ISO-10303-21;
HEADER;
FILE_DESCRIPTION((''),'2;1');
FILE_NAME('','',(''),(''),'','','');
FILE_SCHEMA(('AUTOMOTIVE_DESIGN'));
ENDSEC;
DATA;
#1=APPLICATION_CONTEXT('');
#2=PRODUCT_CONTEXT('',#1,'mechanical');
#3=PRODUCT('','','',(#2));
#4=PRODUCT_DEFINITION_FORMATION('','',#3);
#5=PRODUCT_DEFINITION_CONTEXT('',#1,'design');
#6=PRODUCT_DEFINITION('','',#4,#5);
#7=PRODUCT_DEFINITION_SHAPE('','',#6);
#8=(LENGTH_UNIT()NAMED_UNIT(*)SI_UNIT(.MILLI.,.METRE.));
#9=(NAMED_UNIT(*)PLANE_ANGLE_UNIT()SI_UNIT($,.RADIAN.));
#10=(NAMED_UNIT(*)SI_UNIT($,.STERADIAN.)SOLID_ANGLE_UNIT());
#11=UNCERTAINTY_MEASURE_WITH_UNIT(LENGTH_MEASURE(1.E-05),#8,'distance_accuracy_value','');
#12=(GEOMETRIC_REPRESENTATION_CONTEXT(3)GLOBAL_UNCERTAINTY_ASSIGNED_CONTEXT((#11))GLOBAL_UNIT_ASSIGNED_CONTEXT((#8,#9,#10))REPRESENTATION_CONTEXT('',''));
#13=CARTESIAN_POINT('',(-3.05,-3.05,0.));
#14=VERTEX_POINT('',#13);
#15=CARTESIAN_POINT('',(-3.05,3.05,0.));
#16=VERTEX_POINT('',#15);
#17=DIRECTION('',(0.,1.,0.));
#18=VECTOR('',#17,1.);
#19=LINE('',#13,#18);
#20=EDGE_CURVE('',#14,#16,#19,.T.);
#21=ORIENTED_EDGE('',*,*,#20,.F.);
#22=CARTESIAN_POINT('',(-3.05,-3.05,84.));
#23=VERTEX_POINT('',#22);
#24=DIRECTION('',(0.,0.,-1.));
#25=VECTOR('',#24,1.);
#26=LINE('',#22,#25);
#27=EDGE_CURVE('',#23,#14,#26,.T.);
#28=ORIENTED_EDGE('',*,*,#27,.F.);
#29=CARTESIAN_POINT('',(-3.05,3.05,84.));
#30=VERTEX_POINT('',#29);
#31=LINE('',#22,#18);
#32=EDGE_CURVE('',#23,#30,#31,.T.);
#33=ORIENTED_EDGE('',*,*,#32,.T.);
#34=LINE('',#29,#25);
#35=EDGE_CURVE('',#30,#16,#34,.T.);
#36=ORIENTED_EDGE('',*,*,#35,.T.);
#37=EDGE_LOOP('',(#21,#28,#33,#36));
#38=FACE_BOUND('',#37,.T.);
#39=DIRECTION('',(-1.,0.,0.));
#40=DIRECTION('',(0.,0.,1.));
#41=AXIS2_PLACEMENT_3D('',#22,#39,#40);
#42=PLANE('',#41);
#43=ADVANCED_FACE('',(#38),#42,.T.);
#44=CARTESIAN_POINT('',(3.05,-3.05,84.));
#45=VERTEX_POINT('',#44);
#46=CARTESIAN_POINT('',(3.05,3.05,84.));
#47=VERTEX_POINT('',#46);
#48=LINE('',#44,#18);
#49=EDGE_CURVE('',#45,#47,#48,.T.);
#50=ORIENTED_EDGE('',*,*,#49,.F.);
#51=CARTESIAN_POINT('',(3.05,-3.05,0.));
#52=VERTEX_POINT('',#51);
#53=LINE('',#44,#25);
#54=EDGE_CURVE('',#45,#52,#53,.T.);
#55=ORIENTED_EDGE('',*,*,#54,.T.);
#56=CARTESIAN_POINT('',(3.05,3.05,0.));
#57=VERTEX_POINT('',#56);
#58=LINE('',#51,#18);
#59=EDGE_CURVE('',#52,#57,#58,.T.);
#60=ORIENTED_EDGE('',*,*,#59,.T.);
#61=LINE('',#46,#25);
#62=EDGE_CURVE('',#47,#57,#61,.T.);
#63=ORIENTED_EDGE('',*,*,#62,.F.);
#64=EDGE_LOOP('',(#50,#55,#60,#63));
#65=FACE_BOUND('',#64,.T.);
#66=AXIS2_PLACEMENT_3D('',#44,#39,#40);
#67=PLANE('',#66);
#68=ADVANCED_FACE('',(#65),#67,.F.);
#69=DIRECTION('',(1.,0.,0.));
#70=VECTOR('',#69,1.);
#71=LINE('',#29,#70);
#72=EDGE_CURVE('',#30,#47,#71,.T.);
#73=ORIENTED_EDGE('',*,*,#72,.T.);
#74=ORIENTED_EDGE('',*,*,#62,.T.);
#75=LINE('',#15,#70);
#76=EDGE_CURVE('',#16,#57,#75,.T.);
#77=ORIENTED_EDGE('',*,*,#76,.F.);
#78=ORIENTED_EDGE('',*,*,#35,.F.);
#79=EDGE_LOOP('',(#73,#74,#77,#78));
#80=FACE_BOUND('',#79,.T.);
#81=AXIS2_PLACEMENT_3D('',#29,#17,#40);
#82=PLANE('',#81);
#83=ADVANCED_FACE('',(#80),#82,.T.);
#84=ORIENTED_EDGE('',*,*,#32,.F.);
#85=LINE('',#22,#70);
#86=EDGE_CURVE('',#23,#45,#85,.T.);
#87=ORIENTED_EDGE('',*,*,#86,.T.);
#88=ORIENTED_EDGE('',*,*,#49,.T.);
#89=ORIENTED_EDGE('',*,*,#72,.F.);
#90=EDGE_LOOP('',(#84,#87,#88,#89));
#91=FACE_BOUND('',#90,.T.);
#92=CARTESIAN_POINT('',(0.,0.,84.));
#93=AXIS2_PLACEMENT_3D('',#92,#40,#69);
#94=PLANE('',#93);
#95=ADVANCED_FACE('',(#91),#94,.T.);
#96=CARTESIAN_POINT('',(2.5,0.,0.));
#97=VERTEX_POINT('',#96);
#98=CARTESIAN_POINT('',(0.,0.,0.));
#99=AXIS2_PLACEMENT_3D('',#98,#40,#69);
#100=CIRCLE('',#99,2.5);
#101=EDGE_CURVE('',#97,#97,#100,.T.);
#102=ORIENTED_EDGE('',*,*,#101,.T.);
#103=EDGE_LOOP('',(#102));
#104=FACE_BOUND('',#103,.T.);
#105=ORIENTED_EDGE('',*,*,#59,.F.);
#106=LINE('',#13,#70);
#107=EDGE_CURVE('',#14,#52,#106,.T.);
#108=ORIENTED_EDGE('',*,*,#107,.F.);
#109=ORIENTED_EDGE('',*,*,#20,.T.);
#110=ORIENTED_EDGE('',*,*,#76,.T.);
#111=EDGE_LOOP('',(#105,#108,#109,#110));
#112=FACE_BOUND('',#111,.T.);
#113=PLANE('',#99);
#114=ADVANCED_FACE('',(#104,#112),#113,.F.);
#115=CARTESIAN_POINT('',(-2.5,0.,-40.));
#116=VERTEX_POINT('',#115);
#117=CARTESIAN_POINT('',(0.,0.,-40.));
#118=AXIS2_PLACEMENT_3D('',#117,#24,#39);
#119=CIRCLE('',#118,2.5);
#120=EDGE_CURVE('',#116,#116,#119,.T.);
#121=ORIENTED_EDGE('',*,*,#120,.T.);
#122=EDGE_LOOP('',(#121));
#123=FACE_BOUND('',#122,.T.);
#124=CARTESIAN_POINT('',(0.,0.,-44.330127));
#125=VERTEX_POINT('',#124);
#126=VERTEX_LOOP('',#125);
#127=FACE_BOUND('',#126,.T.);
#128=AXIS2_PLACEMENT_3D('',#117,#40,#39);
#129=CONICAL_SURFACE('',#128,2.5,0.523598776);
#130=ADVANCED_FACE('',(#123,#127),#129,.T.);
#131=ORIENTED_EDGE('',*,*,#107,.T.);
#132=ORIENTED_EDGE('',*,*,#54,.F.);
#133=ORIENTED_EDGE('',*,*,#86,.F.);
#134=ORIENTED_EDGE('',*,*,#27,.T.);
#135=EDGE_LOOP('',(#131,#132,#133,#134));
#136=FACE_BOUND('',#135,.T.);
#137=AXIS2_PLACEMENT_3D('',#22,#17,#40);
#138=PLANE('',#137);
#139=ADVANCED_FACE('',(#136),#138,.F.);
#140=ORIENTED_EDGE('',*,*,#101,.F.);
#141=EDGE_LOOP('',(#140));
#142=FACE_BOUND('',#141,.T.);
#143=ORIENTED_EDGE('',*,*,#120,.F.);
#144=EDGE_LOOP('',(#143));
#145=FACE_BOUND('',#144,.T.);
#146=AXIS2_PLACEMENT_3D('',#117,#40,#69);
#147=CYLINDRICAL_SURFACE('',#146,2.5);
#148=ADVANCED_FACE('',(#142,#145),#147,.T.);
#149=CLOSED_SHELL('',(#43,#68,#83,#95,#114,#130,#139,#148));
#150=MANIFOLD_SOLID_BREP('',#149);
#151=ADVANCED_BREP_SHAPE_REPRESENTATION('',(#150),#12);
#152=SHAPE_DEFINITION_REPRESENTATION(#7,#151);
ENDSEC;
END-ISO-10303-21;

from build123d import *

# Parameters (mm, degrees)
BOSS_EXTRUDE1_OUTLINE_W = 6.1
BOSS_EXTRUDE1_OUTLINE_H = 6.1
BOSS_EXTRUDE1_DEPTH     = 84
SKETCH1_4_R             = 2.5
BOSS_EXTRUDE2_DEPTH     = 40


# Read off the part's stored shape, not the designer's step: Boss-Extrude1
with BuildPart() as part:
    # Boss-Extrude1 outline → Boss-Extrude1 (new body)
    with BuildSketch(Plane.XY):
        Rectangle(BOSS_EXTRUDE1_OUTLINE_W, BOSS_EXTRUDE1_OUTLINE_H)
    extrude(amount=BOSS_EXTRUDE1_DEPTH)

    # Sketch1<4> → Boss-Extrude2 (add)
    with BuildSketch(Plane.XY):
        Circle(SKETCH1_4_R)
    extrude(amount=-BOSS_EXTRUDE2_DEPTH)

    # Boss-Extrude3 cone 1 section (through the dimple's axis) → Boss-Extrude3 (revolve)
    with BuildSketch(Plane(origin=(0, 0, -40), x_dir=(0, -1, 0), z_dir=(1, 0, 0))):
        Polygon((0, 0), (2.5, 0), (0, 4.330127019), align=None)
    revolve(axis=Axis((0, 0, -40), (0, 0, -1)))


solid = part.part
